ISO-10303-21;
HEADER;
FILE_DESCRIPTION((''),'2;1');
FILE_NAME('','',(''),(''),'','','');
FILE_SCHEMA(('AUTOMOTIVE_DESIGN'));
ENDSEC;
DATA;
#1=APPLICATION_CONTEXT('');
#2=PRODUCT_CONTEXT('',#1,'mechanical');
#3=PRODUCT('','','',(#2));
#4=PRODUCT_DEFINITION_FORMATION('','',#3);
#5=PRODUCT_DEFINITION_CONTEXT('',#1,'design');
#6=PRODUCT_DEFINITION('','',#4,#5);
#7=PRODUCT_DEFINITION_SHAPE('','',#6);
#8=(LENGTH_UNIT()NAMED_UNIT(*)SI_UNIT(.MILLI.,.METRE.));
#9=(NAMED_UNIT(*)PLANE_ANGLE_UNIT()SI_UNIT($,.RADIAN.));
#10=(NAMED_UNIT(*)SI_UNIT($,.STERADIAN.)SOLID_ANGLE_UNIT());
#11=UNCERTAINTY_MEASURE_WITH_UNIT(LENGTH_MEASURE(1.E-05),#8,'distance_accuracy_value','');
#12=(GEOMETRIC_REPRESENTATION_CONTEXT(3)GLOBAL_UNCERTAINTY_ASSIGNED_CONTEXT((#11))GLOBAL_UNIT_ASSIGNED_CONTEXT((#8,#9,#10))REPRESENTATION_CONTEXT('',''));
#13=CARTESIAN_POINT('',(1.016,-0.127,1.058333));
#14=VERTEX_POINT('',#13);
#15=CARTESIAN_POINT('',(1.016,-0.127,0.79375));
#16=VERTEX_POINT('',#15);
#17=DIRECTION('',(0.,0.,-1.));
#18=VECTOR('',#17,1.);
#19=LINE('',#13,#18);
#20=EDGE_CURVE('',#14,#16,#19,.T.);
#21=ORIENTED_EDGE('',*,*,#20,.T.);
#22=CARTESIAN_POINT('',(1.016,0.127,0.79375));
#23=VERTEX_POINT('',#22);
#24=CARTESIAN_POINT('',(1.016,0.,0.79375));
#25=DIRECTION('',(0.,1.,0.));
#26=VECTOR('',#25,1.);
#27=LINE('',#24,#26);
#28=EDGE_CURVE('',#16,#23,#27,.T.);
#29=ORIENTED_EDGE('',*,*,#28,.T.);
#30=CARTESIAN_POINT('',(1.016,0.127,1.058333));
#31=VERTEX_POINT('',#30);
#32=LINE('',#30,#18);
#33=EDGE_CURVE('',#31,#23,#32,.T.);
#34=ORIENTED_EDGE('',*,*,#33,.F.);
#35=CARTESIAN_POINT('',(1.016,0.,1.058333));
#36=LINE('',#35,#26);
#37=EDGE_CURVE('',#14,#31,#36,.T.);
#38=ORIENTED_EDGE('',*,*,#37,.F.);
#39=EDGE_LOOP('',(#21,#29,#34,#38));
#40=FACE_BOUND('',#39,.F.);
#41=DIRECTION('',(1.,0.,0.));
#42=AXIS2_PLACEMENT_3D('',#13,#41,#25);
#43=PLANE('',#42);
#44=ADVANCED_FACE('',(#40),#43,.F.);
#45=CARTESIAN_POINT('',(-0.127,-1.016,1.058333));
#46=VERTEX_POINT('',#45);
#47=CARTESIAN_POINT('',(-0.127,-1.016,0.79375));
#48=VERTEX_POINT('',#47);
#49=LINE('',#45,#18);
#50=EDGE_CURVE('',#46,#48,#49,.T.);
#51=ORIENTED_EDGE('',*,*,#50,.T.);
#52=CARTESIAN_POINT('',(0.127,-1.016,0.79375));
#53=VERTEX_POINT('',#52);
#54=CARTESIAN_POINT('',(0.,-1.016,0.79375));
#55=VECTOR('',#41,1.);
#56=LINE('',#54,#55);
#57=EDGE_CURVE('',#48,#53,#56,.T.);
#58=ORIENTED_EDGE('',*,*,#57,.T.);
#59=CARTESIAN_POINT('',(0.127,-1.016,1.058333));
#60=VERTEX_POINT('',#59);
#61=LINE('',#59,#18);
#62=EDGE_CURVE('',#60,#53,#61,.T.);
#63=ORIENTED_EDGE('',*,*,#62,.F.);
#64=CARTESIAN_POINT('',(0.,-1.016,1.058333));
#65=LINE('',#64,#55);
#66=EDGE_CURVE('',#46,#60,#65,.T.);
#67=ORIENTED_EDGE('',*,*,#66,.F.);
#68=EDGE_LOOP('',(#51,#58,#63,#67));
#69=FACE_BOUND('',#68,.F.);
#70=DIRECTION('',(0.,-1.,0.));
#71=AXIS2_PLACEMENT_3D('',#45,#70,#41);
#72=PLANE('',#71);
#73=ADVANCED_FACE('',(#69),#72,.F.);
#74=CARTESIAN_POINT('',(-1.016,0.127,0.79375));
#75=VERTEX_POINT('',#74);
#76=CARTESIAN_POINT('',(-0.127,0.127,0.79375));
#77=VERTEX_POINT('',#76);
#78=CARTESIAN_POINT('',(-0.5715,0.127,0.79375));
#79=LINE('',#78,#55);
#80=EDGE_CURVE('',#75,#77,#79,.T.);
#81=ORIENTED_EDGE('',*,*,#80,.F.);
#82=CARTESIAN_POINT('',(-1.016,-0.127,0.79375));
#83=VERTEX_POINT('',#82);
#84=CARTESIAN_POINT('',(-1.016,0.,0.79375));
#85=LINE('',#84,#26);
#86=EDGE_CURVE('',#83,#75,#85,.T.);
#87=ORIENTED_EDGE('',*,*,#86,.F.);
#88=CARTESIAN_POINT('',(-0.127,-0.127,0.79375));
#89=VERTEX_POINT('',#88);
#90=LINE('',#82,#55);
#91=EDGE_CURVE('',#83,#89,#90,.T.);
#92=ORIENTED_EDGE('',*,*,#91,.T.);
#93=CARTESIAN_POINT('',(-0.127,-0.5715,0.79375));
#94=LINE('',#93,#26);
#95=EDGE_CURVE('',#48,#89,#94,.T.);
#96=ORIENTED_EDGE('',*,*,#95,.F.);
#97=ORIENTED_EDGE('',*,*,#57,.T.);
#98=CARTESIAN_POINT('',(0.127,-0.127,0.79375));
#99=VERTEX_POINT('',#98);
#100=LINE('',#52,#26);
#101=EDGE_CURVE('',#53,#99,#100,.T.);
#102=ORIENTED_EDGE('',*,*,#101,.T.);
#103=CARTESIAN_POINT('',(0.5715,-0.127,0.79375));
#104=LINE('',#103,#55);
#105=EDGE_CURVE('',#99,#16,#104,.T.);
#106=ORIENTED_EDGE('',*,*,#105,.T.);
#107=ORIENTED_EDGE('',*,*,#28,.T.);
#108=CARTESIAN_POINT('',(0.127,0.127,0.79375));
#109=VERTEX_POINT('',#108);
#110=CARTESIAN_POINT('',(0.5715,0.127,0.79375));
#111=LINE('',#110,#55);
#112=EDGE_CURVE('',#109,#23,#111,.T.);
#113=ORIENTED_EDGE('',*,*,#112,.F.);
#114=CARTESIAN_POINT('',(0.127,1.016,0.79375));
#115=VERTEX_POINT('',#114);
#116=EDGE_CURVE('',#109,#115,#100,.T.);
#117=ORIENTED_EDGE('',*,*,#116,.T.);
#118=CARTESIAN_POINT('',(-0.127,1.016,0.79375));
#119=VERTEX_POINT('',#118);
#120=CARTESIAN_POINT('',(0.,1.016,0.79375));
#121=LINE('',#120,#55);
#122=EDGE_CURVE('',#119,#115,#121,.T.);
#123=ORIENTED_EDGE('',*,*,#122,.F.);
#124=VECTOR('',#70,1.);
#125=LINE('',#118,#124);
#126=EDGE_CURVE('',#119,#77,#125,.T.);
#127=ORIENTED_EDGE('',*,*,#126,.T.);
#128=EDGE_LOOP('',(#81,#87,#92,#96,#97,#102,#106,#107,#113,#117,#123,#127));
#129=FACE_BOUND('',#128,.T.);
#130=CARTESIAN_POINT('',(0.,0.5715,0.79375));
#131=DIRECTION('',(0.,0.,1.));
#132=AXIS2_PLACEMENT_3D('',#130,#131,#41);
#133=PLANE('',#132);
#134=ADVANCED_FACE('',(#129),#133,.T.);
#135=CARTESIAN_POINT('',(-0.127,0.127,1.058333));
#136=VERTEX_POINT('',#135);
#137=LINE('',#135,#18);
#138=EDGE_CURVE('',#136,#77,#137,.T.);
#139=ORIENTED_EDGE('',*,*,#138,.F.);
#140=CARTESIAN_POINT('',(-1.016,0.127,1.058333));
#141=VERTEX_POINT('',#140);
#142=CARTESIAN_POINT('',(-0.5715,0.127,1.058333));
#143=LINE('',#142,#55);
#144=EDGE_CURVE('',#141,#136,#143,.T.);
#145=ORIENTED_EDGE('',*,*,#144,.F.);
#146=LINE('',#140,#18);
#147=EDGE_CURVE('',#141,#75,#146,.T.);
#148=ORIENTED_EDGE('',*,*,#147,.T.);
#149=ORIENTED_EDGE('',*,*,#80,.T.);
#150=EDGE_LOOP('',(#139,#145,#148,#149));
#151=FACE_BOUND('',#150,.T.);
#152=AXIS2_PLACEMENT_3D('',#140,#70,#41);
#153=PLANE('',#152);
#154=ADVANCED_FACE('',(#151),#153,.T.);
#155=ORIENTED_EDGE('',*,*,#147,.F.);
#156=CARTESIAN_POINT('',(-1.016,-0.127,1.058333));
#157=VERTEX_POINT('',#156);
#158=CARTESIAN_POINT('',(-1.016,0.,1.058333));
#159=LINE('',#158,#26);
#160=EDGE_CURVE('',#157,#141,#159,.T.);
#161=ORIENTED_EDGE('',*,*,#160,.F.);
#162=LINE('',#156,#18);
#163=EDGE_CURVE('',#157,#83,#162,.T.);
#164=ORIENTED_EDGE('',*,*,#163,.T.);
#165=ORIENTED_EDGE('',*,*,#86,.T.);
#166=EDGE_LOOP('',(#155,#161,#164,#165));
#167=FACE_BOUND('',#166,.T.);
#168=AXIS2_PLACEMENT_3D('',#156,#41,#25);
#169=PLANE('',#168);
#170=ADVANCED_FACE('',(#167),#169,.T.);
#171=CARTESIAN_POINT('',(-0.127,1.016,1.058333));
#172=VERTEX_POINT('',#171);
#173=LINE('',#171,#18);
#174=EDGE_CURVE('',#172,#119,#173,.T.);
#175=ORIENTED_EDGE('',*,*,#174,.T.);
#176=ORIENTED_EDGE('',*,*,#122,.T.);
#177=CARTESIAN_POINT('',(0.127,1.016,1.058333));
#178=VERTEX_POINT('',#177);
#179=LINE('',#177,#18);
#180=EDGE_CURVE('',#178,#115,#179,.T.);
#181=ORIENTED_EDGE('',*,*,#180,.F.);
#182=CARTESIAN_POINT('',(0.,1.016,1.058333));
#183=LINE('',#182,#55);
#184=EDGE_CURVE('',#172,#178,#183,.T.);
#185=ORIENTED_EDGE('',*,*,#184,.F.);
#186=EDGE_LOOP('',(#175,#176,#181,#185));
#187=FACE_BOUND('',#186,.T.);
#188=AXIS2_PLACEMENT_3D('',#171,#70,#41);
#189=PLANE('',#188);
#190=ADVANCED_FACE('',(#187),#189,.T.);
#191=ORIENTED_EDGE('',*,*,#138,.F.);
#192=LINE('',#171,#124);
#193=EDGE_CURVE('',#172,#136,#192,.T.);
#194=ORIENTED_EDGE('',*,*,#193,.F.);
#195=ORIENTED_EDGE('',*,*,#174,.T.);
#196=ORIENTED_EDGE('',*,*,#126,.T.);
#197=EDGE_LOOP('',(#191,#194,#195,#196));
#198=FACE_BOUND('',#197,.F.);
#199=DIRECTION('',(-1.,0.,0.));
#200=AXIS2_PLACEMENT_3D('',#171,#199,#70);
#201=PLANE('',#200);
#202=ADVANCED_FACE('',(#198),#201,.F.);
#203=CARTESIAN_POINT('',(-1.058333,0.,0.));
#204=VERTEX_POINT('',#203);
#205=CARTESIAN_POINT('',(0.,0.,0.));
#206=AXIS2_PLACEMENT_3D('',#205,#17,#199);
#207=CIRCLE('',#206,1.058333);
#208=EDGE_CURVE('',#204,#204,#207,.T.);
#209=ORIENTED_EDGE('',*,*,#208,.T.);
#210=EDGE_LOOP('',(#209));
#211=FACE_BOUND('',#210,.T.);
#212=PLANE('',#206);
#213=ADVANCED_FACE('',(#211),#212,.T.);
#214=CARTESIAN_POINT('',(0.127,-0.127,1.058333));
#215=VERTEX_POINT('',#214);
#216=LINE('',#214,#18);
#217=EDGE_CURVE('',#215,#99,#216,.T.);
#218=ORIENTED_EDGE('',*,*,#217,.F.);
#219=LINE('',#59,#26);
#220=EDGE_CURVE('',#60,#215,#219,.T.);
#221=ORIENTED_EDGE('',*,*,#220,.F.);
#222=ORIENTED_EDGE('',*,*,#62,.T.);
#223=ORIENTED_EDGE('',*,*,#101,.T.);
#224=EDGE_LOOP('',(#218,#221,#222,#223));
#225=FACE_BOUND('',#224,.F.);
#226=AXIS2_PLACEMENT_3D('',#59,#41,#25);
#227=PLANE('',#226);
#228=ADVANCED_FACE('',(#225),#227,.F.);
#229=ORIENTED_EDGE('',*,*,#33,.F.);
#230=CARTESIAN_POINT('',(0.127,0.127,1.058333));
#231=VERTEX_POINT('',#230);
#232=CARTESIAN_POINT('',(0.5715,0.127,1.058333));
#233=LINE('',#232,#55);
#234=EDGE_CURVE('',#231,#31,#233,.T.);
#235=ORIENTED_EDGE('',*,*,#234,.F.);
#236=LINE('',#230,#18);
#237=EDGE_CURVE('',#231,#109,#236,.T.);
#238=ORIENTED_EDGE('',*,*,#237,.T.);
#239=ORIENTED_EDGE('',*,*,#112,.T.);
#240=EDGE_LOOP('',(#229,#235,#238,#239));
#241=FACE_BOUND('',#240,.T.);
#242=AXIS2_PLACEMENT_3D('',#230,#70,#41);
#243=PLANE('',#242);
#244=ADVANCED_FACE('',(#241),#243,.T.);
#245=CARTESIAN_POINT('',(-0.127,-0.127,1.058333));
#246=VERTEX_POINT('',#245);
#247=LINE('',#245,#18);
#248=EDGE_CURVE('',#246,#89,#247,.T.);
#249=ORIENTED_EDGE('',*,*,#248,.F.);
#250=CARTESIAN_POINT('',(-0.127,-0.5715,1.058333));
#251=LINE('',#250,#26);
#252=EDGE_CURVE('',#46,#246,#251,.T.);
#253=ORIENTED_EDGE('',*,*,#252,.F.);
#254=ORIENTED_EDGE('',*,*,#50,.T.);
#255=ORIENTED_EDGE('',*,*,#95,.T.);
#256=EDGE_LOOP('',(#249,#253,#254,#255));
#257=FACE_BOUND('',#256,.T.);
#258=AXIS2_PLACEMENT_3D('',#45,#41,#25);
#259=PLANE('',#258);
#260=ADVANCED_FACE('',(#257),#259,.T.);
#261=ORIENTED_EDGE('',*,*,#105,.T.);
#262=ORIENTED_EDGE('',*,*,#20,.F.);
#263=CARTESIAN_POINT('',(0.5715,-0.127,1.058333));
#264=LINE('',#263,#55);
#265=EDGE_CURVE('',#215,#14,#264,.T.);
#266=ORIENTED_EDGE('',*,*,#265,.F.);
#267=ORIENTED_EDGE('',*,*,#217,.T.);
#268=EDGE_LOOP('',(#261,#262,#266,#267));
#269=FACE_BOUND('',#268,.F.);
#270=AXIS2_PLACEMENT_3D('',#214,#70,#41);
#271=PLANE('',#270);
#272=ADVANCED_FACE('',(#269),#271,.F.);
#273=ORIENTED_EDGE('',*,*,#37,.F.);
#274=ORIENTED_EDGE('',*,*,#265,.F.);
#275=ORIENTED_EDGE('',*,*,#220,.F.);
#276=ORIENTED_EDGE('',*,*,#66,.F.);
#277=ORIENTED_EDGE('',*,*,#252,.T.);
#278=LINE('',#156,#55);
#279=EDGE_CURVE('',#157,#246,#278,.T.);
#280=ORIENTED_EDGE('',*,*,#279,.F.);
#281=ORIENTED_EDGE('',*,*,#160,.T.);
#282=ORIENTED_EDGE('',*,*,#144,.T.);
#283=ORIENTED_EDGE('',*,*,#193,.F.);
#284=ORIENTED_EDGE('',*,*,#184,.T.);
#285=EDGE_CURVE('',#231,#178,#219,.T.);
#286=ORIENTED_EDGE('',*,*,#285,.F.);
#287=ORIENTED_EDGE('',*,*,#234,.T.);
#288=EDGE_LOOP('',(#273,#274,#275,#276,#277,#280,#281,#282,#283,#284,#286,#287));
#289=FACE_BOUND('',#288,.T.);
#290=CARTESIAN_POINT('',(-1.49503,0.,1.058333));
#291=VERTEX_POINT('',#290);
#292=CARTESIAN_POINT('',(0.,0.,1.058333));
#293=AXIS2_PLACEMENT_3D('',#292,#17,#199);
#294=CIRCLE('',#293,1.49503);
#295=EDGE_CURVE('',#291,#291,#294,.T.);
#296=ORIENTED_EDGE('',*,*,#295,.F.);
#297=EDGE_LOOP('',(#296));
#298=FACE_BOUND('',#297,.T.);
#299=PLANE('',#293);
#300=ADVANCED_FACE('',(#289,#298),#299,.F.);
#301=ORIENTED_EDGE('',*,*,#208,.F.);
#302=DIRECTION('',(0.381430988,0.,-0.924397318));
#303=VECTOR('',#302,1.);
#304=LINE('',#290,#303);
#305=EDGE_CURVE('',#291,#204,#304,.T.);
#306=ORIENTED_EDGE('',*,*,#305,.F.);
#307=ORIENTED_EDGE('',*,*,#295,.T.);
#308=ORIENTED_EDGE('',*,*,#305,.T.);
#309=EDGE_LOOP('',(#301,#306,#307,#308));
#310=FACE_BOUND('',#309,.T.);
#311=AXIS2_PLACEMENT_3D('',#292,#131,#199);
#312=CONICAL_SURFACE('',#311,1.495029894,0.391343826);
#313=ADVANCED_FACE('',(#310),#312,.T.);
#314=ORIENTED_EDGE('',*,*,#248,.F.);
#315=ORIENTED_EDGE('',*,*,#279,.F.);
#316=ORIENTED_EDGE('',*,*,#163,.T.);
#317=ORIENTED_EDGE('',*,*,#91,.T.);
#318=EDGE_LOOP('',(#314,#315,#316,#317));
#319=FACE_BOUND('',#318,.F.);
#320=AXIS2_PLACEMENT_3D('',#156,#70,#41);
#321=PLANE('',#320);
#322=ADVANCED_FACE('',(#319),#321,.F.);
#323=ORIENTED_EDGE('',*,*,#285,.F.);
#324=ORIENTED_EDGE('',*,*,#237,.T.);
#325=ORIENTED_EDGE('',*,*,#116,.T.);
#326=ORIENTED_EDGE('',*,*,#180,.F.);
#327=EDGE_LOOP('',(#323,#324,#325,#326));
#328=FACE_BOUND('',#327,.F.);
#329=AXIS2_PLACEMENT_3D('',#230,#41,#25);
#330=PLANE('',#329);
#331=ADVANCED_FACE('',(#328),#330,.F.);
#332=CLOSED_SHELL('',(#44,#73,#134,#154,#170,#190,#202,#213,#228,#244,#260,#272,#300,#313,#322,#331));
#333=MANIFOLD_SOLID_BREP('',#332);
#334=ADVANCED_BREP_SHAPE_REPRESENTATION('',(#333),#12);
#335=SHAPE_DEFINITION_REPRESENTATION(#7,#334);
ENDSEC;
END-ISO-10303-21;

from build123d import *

# Parameters (mm, degrees)
F2_W     = 0.254
F2_H     = 0.889
F2_H_2   = 0.254
F2_W_2   = 0.889
F3_DEPTH = 0.2645833333


with BuildPart() as f1:
    # F0 (on Front) → F1 (revolve)
    with BuildSketch(Plane.XZ):
        Polygon((-1.0583333333, 0), (0, 0), (0, 1.0583333333), (-1.4950298937, 1.0583333333), align=None)
    revolve(axis=Axis((0, 0, 0.5291666667), (0, 0, -1)))

    # F2 (on face) → F3 (cut)
    with BuildSketch(Plane.XY.offset(1.0583333333)):
        with Locations((0, 0.5715)):
            Rectangle(F2_W, F2_H)
        Rectangle(F2_W, F2_H_2)
        with Locations((-0.5715, 0)):
            Rectangle(F2_W_2, F2_H_2)
        with Locations((0, -0.5715)):
            Rectangle(F2_W, F2_H)
        with Locations((0.5715, 0)):
            Rectangle(F2_W_2, F2_H_2)
    extrude(amount=-F3_DEPTH, mode=Mode.SUBTRACT)


solid = f1.part
